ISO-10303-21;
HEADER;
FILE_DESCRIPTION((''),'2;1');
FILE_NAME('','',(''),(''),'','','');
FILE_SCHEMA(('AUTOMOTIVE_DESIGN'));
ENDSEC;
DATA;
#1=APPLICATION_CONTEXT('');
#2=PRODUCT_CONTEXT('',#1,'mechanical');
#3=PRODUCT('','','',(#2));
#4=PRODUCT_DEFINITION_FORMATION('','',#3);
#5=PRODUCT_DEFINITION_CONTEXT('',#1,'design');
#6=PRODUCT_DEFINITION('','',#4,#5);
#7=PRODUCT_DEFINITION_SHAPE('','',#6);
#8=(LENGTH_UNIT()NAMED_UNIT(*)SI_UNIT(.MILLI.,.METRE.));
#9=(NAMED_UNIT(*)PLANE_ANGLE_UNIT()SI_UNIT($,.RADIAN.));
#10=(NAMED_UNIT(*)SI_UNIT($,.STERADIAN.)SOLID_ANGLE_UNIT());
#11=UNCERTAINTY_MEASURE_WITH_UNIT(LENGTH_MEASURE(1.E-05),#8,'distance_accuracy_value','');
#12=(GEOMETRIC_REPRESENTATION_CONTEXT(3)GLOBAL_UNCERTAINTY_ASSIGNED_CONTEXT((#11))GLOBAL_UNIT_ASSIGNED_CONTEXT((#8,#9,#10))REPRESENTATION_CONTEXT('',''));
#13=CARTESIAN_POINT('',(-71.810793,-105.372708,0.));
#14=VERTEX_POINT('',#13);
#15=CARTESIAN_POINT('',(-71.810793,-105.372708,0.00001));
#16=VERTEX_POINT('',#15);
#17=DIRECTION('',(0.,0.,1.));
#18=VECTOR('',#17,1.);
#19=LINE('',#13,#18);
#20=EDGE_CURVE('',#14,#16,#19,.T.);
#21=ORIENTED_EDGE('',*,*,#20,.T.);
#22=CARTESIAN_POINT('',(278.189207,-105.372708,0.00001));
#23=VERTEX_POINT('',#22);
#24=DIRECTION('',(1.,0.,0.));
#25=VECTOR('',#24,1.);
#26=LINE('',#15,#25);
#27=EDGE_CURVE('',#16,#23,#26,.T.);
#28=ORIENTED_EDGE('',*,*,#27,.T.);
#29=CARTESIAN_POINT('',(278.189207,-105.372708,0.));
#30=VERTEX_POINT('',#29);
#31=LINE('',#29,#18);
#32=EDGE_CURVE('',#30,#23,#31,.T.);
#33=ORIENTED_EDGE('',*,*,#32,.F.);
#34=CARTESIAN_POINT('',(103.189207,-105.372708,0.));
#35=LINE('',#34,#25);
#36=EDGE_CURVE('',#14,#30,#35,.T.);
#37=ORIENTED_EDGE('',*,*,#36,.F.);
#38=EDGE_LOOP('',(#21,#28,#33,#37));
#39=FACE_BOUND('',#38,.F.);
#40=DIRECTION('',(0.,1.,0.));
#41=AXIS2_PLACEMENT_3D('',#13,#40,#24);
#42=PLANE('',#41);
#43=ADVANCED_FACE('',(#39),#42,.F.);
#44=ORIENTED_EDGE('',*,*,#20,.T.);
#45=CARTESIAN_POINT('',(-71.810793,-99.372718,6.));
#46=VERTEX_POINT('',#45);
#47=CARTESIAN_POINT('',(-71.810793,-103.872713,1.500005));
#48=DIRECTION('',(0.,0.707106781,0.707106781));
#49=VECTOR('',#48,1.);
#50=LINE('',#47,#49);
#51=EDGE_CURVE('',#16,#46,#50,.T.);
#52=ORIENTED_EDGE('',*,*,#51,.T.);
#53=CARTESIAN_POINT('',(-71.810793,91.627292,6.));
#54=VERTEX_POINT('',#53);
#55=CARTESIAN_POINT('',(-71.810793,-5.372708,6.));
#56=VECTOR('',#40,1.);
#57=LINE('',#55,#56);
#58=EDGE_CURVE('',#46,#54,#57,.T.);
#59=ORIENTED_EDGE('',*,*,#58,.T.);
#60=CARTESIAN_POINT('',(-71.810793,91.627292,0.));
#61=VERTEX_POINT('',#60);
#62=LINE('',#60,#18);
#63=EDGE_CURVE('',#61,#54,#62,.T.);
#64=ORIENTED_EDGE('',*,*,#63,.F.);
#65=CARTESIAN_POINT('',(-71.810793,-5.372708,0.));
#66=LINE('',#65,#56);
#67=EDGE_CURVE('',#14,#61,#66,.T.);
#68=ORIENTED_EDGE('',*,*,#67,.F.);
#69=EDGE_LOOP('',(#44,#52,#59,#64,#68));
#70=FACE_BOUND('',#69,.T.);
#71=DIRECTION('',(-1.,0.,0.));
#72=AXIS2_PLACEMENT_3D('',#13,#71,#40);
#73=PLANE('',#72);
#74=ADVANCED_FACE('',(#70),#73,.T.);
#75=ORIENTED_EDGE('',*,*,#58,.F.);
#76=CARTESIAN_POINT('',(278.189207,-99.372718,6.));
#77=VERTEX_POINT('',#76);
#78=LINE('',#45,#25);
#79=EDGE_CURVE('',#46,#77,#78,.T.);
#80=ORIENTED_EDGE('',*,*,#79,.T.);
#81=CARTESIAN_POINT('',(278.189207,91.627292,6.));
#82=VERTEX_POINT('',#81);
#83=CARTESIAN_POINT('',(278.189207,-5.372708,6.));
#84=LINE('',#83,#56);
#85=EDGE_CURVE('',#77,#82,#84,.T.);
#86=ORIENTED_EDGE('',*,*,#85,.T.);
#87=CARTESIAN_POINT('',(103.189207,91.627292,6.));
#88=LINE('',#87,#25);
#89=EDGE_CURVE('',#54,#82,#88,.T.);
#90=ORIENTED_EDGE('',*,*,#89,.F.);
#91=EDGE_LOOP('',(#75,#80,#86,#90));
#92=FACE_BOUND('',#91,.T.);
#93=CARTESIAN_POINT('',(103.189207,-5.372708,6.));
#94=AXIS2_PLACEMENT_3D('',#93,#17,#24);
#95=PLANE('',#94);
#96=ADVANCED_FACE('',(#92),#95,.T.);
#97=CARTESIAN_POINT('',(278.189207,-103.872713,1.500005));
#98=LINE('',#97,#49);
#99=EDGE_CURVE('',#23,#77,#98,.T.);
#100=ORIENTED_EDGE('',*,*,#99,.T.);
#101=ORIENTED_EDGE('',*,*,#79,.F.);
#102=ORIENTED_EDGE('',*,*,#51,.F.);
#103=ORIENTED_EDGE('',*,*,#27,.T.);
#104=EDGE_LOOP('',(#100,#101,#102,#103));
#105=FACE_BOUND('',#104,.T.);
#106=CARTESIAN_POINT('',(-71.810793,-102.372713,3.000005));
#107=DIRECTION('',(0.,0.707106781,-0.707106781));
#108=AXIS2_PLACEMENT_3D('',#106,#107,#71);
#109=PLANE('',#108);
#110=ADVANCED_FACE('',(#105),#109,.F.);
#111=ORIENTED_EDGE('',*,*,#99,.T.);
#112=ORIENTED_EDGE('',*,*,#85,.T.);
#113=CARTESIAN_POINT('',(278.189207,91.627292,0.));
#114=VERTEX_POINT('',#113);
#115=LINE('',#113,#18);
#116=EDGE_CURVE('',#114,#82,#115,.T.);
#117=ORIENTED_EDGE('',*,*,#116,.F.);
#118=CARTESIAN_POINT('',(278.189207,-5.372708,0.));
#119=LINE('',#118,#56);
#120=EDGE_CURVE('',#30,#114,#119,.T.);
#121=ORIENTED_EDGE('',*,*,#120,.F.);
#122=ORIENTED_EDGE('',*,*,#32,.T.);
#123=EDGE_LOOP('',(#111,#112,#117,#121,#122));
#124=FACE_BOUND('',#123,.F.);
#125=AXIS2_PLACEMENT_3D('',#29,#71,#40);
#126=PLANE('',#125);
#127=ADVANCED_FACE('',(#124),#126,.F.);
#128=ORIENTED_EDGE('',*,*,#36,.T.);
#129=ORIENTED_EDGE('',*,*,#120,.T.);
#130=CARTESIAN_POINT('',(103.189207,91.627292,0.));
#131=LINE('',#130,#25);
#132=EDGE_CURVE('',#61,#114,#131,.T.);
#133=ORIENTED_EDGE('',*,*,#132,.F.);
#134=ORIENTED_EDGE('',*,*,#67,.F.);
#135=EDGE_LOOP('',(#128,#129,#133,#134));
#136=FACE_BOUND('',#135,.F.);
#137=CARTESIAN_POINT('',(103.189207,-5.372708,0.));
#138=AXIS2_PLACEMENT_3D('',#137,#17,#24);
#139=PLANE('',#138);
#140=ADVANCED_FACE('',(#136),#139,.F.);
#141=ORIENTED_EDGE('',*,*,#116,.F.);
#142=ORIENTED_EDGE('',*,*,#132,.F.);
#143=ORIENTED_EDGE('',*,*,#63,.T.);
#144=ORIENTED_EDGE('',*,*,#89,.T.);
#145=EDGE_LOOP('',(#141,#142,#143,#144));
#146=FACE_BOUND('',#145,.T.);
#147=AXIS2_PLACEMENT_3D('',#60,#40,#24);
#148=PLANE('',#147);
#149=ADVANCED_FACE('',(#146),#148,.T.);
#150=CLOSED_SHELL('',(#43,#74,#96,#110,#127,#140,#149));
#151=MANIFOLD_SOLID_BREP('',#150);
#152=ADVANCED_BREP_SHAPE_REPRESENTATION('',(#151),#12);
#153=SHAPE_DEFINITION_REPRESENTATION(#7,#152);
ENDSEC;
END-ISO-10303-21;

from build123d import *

# Parameters (mm, degrees)
F0_W     = 350
F0_H     = 200
F1_DEPTH = 6
F2_SIZE  = 5.99999
F3_DEPTH = 3


# Not quite as in the source:
# - a fillet or chamfer is up to 0.001 mm smaller than in the source, because OpenCascade refuses the exact size


with BuildPart() as f1:
    # F0 (on Top) → F1 (new body)
    with BuildSketch(Plane.XY):
        with Locations((103.189206589, -5.372708199)):
            Rectangle(F0_W, F0_H)
    extrude(amount=F1_DEPTH)

    # F2 (size 6 in the source; OpenCascade refuses exactly that, so slightly less here)
    f2_edges = [f1.edges().sort_by_distance(p)[0] for p in [
        (103.189207, -105.372708, 6),
    ]]
    chamfer(f2_edges, length=F2_SIZE)

    # F3 (cut): a face of the model
    f3_faces = [f1.faces().sort_by_distance(p)[0] for p in [
        (103.189206589, 94.627291801, 3),
    ]]
    extrude(f3_faces, amount=-F3_DEPTH, mode=Mode.SUBTRACT)


solid = f1.part
